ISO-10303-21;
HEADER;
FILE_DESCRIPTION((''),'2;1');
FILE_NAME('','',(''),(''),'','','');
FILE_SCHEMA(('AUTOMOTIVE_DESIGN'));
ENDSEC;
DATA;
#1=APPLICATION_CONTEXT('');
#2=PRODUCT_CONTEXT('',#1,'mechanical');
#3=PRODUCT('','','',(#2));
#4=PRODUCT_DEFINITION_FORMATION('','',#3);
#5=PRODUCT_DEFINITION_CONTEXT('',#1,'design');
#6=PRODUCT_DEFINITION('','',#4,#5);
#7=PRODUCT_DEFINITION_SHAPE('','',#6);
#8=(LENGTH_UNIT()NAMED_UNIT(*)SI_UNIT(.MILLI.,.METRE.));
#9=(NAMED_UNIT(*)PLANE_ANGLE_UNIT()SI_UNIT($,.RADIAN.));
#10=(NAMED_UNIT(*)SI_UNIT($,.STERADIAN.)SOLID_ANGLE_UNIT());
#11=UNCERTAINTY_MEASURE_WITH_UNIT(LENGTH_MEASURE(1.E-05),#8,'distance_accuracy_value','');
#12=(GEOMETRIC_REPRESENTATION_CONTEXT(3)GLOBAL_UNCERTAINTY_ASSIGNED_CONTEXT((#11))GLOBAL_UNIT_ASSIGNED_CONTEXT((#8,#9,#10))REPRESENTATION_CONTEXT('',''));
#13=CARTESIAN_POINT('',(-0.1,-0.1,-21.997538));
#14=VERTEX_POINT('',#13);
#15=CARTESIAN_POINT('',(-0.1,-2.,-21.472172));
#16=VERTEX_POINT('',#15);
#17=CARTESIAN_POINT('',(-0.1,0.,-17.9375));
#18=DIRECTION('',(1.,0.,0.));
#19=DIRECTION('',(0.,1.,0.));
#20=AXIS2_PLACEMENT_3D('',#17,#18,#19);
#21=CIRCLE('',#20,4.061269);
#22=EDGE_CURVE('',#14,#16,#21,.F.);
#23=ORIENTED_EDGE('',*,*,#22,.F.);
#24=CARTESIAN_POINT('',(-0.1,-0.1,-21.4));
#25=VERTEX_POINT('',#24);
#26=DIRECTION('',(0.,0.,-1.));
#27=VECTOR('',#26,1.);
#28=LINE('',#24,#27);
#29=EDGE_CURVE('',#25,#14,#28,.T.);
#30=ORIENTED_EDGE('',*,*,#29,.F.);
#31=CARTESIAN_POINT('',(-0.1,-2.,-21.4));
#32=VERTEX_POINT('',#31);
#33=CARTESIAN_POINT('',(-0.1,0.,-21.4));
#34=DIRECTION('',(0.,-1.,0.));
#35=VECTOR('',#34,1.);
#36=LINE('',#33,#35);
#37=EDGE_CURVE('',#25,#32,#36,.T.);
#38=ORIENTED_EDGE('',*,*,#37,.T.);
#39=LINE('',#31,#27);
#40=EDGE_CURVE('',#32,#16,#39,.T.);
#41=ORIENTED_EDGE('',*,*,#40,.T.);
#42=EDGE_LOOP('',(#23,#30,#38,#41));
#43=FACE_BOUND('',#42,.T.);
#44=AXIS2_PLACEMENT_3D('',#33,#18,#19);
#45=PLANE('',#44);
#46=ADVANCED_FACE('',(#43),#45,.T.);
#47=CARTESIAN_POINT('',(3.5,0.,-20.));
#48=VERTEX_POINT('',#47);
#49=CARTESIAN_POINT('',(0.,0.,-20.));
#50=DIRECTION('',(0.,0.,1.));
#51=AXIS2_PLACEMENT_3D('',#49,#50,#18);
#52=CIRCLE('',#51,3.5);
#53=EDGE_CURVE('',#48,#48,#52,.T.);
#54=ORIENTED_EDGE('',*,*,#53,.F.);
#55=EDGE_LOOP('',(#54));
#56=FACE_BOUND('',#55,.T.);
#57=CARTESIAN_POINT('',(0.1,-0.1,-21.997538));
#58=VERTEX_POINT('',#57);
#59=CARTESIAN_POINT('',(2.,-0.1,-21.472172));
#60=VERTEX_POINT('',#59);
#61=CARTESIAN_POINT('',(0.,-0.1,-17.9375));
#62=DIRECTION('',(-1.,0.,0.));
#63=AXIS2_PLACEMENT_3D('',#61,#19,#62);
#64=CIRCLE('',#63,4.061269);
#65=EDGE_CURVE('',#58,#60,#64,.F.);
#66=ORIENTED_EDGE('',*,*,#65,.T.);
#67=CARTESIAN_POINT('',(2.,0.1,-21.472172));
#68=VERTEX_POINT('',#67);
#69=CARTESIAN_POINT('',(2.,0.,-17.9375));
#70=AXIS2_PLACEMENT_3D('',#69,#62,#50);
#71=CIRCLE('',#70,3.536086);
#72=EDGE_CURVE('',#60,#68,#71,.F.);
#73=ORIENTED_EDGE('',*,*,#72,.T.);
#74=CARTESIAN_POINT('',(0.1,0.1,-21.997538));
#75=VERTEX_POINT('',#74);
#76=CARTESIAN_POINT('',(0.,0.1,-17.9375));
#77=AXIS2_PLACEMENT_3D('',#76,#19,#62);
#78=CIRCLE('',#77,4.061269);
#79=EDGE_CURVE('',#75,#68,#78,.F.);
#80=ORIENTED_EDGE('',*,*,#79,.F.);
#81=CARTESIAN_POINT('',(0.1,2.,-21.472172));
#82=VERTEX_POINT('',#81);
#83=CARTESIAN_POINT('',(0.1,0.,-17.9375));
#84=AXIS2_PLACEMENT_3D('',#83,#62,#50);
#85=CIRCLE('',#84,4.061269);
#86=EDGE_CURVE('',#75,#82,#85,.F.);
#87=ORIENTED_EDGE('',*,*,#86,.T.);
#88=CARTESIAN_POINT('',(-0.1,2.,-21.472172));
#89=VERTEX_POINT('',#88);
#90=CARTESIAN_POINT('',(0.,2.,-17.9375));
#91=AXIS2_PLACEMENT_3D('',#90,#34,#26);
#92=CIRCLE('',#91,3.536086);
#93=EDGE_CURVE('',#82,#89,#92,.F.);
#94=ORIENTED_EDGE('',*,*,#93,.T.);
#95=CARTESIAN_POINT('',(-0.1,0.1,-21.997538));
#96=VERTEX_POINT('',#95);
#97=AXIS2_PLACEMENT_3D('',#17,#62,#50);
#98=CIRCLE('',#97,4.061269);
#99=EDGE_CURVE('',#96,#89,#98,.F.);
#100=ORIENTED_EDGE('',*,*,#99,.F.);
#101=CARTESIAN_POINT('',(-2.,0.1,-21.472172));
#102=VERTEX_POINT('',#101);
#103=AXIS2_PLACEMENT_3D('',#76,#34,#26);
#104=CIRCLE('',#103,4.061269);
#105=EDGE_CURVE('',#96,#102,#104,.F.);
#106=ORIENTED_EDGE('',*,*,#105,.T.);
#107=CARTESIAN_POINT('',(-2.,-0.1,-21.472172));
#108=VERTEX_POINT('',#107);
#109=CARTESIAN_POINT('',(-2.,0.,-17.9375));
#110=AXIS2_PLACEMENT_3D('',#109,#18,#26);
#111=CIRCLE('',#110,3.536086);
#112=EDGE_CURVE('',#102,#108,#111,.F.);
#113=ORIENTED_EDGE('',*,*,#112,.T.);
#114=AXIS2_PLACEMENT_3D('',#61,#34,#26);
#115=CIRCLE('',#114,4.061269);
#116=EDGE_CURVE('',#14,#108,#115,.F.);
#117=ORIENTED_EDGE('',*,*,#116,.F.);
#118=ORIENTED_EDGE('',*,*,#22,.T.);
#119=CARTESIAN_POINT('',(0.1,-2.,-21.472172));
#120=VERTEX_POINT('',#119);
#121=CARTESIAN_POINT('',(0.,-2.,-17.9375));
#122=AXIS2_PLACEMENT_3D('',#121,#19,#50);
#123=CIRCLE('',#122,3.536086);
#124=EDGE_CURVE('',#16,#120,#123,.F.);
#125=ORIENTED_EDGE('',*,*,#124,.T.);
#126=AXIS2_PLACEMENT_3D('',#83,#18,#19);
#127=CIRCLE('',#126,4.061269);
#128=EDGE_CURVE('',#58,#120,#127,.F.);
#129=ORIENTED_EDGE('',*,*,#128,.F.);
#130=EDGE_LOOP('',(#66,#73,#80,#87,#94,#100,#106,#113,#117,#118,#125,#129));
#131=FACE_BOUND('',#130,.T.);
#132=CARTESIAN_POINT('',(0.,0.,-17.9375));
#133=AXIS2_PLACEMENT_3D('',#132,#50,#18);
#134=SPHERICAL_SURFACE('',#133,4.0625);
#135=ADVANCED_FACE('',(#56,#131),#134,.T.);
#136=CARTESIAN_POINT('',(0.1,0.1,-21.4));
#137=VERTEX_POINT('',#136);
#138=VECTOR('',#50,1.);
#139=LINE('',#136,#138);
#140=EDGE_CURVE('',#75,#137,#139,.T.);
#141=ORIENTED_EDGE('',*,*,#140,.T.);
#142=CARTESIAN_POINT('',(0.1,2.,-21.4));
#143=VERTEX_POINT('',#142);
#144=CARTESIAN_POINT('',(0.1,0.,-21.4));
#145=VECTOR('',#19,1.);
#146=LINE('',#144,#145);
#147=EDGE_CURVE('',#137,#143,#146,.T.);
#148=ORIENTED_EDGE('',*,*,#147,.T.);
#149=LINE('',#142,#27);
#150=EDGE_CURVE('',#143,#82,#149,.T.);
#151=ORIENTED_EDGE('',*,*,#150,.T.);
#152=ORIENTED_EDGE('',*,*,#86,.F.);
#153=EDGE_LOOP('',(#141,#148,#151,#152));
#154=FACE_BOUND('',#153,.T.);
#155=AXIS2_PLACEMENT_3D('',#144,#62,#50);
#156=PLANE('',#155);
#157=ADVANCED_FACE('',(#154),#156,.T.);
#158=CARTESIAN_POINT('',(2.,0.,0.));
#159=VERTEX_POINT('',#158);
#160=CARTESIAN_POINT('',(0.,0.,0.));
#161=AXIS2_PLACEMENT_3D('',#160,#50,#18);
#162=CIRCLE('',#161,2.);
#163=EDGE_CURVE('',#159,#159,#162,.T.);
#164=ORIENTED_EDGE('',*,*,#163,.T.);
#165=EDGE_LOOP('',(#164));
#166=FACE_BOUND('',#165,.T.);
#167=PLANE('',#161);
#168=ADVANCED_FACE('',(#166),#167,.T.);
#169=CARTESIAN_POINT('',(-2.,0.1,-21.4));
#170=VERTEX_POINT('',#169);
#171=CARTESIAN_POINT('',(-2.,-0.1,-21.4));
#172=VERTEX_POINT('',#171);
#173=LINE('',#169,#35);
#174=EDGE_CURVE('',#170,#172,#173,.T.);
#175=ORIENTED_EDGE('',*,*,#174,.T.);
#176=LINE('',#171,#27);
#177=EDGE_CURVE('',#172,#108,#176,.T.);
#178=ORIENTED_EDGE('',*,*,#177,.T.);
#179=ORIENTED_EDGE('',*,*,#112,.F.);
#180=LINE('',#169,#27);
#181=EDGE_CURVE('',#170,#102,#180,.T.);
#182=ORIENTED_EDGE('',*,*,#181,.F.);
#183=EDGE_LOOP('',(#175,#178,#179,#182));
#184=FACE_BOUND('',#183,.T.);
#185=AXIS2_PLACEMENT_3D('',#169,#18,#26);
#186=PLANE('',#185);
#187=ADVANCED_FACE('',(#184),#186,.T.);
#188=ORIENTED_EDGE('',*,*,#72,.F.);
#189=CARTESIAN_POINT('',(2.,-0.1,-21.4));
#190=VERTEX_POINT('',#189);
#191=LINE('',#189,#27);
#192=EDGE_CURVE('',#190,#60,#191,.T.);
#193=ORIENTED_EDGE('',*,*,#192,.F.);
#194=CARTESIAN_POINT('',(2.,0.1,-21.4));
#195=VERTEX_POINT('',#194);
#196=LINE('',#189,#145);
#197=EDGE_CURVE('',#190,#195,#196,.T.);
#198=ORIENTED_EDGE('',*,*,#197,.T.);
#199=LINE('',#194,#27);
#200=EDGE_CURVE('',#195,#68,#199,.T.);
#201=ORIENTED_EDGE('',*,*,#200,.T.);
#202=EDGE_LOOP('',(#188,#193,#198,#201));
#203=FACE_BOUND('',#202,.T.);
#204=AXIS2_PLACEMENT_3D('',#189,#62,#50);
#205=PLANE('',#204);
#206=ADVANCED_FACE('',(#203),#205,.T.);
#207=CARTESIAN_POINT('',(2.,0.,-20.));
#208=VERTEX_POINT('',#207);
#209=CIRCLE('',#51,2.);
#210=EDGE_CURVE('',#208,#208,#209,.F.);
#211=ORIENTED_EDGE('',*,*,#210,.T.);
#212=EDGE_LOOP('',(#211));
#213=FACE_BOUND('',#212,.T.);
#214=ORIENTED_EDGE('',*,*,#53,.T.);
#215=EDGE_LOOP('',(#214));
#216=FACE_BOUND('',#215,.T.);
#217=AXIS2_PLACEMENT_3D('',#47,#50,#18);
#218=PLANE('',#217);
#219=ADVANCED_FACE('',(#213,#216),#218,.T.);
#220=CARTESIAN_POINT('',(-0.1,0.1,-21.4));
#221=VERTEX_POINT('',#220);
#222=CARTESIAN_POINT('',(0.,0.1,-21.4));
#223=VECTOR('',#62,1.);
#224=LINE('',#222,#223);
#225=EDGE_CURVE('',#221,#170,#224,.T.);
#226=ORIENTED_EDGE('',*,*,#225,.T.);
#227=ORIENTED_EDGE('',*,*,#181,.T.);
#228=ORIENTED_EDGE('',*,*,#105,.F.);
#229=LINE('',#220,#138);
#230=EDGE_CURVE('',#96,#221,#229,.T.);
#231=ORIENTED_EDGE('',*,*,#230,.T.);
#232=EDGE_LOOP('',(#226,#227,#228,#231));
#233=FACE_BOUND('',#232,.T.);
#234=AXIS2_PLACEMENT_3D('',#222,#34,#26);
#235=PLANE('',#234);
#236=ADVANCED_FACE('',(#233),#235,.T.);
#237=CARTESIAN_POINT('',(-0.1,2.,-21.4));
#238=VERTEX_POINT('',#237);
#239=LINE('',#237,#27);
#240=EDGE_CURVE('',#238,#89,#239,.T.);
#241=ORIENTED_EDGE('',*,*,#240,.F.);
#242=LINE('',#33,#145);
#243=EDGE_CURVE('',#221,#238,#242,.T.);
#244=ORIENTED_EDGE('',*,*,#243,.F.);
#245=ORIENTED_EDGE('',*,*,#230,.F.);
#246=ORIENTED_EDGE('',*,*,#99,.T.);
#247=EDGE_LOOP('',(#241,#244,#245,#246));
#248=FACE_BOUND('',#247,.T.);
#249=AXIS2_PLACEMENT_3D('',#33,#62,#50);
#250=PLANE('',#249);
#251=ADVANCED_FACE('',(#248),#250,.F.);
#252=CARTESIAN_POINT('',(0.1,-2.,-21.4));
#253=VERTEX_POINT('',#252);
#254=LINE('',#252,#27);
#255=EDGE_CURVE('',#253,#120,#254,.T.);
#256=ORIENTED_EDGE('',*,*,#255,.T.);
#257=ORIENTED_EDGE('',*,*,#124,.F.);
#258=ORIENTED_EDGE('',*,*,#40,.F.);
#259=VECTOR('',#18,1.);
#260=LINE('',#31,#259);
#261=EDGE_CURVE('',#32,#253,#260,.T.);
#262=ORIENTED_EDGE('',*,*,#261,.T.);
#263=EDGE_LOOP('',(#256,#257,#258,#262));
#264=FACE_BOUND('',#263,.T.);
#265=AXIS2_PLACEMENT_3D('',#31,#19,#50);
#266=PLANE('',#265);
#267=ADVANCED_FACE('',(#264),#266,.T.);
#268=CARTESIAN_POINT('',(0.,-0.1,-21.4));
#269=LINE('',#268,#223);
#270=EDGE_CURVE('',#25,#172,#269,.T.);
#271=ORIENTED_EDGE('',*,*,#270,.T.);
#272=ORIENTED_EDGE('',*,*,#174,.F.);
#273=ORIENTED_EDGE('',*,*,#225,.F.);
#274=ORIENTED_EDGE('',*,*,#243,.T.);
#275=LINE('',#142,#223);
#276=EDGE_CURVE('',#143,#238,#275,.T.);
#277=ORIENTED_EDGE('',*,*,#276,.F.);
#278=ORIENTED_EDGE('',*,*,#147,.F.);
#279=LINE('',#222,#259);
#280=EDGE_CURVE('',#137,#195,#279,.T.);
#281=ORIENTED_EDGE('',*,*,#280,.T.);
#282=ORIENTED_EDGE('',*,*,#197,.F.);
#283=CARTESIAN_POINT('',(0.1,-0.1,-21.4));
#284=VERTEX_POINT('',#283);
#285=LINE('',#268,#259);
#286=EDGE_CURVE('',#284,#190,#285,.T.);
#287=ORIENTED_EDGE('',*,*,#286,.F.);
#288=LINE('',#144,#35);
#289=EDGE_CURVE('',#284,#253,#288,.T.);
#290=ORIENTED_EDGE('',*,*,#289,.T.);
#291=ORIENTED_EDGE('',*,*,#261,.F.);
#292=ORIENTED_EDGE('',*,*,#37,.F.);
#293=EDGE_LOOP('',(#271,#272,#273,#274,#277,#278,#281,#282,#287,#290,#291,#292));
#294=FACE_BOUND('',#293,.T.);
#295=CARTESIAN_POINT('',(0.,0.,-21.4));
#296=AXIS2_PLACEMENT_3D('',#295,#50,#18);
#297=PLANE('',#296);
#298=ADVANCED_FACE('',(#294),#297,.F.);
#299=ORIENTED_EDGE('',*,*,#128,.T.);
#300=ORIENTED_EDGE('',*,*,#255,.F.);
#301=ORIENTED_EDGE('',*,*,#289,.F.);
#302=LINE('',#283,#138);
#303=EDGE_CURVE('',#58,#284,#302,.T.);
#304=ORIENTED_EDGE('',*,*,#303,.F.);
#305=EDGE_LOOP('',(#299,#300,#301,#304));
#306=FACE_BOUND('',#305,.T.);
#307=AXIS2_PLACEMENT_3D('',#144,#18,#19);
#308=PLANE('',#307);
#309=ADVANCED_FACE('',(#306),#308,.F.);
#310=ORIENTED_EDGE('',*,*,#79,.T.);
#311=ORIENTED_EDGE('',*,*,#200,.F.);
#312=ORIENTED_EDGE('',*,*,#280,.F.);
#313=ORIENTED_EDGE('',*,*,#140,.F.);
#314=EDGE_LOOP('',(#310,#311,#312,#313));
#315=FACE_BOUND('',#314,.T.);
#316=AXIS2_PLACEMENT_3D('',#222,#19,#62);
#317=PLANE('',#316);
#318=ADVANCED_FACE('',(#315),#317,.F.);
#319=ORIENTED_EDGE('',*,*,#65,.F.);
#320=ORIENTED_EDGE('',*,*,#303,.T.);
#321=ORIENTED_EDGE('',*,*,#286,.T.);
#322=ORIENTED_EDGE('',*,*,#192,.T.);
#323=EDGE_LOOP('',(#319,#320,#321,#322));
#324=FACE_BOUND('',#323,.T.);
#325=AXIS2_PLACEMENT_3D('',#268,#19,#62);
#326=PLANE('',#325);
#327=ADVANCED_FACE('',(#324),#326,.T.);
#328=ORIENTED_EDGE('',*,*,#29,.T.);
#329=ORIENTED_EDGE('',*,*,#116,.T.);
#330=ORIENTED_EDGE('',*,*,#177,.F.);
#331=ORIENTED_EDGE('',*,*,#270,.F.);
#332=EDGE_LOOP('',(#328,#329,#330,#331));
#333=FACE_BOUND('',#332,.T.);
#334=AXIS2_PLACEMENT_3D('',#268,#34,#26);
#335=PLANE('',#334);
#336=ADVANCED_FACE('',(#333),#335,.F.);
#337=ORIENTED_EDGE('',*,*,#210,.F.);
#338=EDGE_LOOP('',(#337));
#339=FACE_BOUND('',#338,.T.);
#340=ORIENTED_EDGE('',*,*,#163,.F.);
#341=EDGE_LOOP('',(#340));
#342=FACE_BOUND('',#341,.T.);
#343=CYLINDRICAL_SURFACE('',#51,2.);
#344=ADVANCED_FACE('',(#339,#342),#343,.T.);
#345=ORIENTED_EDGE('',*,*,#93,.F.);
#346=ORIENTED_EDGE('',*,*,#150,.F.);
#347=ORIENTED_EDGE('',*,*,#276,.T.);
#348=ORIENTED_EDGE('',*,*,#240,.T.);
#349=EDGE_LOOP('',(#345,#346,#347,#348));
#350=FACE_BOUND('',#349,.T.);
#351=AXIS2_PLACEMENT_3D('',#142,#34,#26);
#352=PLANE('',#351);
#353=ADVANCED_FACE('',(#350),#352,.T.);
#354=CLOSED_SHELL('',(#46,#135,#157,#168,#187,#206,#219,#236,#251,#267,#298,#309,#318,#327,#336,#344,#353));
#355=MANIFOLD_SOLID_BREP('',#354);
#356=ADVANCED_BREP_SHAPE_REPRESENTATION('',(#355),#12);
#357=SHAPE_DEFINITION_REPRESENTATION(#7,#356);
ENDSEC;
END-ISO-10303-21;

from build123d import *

# Parameters (mm, degrees)
CROQUIS2_R                   = 2
SALIENTE_EXTRUIR1_DEPTH      = 20
CORTAR_EXTRUIR_L_MINA2_START = -0.6
CORTAR_EXTRUIR_L_MINA2_DEPTH = 0.6


# Read off the part's stored shape, not the designer's step: Cortar-Extruir-Lámina2
with BuildPart() as part:
    # Croquis2 → Saliente-Extruir1 (new body)
    with BuildSketch(Plane.XY):
        Circle(CROQUIS2_R)
    extrude(amount=-SALIENTE_EXTRUIR1_DEPTH)

    # Croquis4 → Revolución1 (revolve)
    with BuildSketch(Plane(origin=(0, 0, 0), x_dir=(1, 0, 0), z_dir=(0, 1, 0))):
        with BuildLine():
            Line((3.5, 20), (0, 20))
            Line((0, 20), (0, 22))
            ThreePointArc((0, 22), (2.015564437, 21.464737765), (3.5, 20))
        make_face()
    revolve(axis=Axis((0, 0, -20), (0, 0, -1)))

    # Cortar-Extruir-Lámina2 outline → Cortar-Extruir-Lámina2 (cut)
    with BuildSketch(Plane(origin=(0, 0, -22), x_dir=(-1, 0, 0), z_dir=(0, 0, -1)).offset(CORTAR_EXTRUIR_L_MINA2_START)):
        Polygon((0.1, -2), (0.1, -0.1), (2, -0.1), (2, 0.1), (0.1, 0.1), (0.1, 2), (-0.1, 2), (-0.1, 0.1), (-2, 0.1), (-2, -0.1), (-0.1, -0.1), (-0.1, -2), align=None)
    extrude(amount=CORTAR_EXTRUIR_L_MINA2_DEPTH, mode=Mode.SUBTRACT)


solid = part.part
